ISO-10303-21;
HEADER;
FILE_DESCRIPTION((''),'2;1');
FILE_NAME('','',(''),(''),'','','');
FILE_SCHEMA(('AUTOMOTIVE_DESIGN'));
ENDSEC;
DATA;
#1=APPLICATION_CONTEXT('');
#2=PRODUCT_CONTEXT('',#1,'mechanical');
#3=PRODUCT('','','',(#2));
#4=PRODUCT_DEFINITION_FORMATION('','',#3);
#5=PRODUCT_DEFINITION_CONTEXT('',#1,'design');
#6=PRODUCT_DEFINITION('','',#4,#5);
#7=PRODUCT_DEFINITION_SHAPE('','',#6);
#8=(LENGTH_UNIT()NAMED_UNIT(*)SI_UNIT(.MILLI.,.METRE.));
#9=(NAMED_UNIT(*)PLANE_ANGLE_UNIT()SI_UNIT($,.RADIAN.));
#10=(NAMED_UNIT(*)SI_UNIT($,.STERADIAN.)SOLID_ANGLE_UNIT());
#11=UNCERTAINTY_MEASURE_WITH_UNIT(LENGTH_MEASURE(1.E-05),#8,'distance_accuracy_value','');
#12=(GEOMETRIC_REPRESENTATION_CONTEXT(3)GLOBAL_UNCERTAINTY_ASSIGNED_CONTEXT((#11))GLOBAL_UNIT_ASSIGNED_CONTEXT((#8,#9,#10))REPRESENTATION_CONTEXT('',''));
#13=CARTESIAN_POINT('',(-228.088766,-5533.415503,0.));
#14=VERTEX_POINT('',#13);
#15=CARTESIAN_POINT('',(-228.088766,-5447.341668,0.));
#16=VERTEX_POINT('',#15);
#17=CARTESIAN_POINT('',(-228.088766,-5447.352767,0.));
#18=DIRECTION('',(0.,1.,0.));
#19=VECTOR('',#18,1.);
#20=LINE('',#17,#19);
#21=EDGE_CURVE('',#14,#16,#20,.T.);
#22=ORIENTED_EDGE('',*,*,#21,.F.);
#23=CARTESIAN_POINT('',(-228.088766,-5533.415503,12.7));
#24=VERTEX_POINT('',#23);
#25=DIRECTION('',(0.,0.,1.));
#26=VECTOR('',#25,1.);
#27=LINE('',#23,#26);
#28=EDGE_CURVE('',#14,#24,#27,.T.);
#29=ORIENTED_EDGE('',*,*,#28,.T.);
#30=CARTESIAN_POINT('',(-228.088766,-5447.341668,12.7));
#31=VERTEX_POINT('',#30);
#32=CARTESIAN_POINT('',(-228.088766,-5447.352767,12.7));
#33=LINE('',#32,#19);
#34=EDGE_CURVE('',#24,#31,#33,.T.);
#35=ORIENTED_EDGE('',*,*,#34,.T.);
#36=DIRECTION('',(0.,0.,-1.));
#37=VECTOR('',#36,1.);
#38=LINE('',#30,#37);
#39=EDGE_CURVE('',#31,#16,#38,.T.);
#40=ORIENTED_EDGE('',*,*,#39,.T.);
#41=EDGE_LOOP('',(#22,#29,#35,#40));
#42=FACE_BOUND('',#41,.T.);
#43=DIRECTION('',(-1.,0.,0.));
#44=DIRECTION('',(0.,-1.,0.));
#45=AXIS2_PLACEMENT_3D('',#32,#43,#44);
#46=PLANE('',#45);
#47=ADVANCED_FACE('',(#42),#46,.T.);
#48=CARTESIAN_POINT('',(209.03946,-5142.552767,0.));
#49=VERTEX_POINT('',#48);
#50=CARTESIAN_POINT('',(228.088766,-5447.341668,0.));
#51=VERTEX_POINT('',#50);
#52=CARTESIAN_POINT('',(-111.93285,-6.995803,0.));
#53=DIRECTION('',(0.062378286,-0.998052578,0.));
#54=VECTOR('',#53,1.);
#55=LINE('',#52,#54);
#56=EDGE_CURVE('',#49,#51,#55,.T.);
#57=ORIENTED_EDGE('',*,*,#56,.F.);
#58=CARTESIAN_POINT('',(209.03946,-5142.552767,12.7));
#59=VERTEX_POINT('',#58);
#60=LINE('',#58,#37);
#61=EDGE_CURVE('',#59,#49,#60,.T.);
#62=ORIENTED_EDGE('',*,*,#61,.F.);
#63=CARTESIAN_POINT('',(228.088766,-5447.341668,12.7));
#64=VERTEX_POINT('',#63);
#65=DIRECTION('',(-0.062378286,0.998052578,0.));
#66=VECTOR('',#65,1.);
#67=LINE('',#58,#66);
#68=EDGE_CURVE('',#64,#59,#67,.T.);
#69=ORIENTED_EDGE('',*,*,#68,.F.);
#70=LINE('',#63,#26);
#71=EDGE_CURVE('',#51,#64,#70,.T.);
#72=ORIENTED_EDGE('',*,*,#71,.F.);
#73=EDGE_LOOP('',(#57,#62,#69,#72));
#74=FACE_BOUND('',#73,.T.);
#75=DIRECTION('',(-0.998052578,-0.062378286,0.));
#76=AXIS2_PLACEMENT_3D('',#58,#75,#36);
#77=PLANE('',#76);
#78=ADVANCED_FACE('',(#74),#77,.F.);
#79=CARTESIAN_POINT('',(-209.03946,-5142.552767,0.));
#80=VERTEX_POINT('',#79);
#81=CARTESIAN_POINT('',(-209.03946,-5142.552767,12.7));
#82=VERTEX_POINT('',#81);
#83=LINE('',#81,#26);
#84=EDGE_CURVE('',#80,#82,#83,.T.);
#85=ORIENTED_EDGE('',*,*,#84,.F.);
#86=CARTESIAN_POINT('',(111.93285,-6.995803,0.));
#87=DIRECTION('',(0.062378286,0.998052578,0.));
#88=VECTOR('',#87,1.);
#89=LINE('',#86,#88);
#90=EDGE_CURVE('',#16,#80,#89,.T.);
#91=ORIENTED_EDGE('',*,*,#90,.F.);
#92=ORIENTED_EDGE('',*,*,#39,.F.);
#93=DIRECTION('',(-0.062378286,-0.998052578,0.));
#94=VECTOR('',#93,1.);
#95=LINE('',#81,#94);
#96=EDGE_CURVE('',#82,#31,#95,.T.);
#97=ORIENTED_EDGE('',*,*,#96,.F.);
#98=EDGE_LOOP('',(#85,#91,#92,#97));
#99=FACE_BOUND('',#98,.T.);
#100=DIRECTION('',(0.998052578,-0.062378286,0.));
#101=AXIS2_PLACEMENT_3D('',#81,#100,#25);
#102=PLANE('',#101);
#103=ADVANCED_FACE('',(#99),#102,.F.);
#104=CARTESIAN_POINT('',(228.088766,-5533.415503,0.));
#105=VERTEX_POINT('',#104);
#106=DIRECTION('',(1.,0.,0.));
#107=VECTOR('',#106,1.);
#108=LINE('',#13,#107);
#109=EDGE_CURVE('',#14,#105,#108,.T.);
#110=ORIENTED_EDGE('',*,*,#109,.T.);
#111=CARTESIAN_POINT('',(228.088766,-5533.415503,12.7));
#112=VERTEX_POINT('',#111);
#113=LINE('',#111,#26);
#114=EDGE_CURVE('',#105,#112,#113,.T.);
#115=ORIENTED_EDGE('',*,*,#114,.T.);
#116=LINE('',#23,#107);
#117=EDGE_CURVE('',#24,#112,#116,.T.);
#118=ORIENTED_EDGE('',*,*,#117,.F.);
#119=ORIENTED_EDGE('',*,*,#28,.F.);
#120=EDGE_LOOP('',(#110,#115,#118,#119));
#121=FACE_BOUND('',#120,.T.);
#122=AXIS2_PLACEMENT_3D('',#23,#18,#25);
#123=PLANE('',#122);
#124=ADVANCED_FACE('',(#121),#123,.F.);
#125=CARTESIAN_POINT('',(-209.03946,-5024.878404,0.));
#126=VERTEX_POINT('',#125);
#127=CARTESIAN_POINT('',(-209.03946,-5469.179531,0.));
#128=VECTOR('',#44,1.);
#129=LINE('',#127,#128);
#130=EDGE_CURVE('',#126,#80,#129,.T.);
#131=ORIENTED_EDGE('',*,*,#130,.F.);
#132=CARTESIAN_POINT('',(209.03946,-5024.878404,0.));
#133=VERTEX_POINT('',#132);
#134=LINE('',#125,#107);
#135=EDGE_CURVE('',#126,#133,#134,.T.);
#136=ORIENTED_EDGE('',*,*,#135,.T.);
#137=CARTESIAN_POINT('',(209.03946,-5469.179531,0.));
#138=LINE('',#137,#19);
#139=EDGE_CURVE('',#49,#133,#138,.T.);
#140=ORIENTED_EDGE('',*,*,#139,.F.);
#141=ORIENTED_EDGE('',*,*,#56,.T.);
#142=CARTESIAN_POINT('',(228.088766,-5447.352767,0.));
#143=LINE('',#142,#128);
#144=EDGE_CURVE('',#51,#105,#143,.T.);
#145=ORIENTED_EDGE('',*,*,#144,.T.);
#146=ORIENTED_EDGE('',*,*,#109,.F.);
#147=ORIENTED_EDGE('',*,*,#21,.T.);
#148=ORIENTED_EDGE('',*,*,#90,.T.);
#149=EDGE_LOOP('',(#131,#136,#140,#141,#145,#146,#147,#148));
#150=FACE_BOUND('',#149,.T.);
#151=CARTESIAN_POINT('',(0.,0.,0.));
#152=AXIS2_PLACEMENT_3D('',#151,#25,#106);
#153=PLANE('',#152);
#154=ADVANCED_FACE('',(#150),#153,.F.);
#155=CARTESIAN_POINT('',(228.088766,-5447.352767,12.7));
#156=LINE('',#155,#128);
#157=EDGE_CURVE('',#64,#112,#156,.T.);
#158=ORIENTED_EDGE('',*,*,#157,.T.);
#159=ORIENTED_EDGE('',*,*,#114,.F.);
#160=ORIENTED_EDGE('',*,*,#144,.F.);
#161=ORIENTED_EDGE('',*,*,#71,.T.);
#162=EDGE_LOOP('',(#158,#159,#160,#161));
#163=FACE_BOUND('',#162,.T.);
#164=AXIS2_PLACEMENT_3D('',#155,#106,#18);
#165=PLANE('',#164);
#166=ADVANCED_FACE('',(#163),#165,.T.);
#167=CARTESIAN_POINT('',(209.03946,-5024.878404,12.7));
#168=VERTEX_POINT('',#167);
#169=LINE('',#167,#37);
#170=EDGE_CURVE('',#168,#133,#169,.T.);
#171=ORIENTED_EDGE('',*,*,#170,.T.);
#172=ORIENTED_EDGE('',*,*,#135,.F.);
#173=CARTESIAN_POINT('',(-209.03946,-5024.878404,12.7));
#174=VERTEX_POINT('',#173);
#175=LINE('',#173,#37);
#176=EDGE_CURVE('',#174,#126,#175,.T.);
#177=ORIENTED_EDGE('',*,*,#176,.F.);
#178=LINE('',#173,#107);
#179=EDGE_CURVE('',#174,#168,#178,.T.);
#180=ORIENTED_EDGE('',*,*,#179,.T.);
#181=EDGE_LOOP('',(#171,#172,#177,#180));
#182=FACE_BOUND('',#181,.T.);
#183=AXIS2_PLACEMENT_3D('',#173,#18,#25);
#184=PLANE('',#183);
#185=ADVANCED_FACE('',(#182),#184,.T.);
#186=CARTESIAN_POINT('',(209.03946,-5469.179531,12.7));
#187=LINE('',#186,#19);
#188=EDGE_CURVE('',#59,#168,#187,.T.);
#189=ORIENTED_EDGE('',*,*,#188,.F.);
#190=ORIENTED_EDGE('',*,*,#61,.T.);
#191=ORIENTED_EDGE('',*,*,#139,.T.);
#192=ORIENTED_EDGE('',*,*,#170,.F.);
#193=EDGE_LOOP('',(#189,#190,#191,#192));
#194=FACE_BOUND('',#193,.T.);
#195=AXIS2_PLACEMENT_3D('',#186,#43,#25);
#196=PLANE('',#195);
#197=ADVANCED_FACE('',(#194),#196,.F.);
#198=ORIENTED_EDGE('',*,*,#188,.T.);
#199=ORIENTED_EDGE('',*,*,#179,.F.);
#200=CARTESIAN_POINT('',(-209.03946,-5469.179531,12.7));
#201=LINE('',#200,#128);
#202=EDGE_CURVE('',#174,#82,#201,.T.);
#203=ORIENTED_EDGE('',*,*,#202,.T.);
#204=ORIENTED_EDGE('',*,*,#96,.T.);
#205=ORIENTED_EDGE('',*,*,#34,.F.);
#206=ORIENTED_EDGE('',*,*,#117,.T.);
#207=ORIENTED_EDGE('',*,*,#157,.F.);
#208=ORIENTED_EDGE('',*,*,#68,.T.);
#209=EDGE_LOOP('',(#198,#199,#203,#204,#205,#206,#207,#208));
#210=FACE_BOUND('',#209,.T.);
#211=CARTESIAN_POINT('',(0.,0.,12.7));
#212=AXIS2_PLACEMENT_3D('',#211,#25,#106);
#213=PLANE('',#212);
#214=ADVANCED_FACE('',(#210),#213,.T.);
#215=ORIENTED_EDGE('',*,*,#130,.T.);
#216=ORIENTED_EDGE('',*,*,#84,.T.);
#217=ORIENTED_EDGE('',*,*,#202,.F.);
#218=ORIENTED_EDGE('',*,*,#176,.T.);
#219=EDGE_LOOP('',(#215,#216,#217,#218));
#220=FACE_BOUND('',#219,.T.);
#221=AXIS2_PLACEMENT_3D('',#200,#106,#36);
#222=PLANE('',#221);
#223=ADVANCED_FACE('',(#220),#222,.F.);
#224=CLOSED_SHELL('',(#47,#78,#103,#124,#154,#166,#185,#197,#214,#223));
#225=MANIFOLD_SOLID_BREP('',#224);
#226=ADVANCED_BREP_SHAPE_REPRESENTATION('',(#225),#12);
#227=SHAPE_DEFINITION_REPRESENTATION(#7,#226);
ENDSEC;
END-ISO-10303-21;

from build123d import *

# Parameters (mm, degrees)
SKETCH1_W           = 418.07892
SKETCH1_H           = 415.925
BOSS_EXTRUDE1_DEPTH = 12.7
SKETCH2_W           = 418.07892
SKETCH2_H           = 79.68996
BOSS_EXTRUDE2_DEPTH = 12.7
SKETCH3_W           = 418.07892
SKETCH3_H           = 28.376126504
BOSS_EXTRUDE3_DEPTH = 12.7
BOSS_EXTRUDE4_DEPTH = 12.7
CHAMFER1_SIZE       = 304.8
CHAMFER1_SIZE_2     = 19.05
SKETCH5_W           = 12.7
SKETCH5_H           = 15.453987587
CUT_EXTRUDE1_DEPTH  = 5568.603780331


with BuildPart() as part:
    # Sketch1 → Boss-Extrude1 (new body)
    with BuildSketch(Plane.XY):
        with Locations((0, -5261.217030575)):
            Rectangle(SKETCH1_W, SKETCH1_H)
    extrude(amount=BOSS_EXTRUDE1_DEPTH)

    # Sketch2 → Boss-Extrude2 (add, through all)
    with BuildSketch(Plane(origin=(0, 0, 0), x_dir=(-1, 0, 0), z_dir=(0, 0, -1))):
        with Locations((0, -5509.024510575)):
            Rectangle(SKETCH2_W, SKETCH2_H)
    extrude(amount=-BOSS_EXTRUDE2_DEPTH)

    # Sketch3 → Boss-Extrude3 (add, through all)
    with BuildSketch(Plane(origin=(0, 0, 0), x_dir=(-1, 0, 0), z_dir=(0, 0, -1))):
        with Locations((0, -5039.066467323)):
            Rectangle(SKETCH3_W, SKETCH3_H)
    extrude(amount=-BOSS_EXTRUDE3_DEPTH)

    # Sketch4 → Boss-Extrude4 (add, through all)
    with BuildSketch(Plane(origin=(0, 0, 0), x_dir=(-1, 0, 0), z_dir=(0, 0, -1))):
        Polygon((209.038766336, -5447.352766987), (228.088766336, -5447.352766987), (228.088766336, -5548.869490575), (209.03946, -5548.869490575), align=None)
        Polygon((-209.03946, -5548.869490575), (-209.038766336, -5447.352766987), (-228.088766336, -5447.352766987), (-228.088766336, -5548.869490575), align=None)
    extrude(amount=-BOSS_EXTRUDE4_DEPTH)

    # Chamfer1
    # the kernel refuses this chamfer: 304.8, 19.05 mm, written as the material it adds along each edge
    with BuildSketch(Plane(origin=(-209.03946, -5447.352766987, 0), x_dir=(0.002399337658707147, 0.9999971215852571, 0), z_dir=(0, 0, 1))) as chamfer1_piece_1_section:
        Polygon((CHAMFER1_SIZE * 0.999997121585, CHAMFER1_SIZE * 0.00239933765871), (-CHAMFER1_SIZE_2 * 0.00239933765871, CHAMFER1_SIZE_2 * 0.999997121585), (0, 0), align=None)
    chamfer1_piece_1 = extrude(amount=12.7, mode=Mode.PRIVATE)
    chamfer1_piece_1 = split(chamfer1_piece_1, bisect_by=Plane(origin=(-228.088766336, -5325.682018196, 6.35), z_dir=(1, 0, 0)), keep=Keep.TOP, mode=Mode.PRIVATE)
    add(chamfer1_piece_1)
    with BuildSketch(Plane(origin=(209.03946, -5447.352766987, 0), x_dir=(0.8520963193143735, -0.5233850041899339, 0), z_dir=(0, 0, 1))) as chamfer1_piece_2_section:
        Polygon((CHAMFER1_SIZE_2 * 0.852096319314, CHAMFER1_SIZE_2 * 0.52338500419), (-CHAMFER1_SIZE * 0.52338500419, CHAMFER1_SIZE * 0.852096319314), (0, 0), align=None)
    chamfer1_piece_2 = extrude(amount=12.7, mode=Mode.PRIVATE)
    chamfer1_piece_2 = split(chamfer1_piece_2, bisect_by=Plane(origin=(228.088766336, -5325.682018196, 6.35), z_dir=(-1, 0, 0)), keep=Keep.TOP, mode=Mode.PRIVATE)
    add(chamfer1_piece_2)

    # Sketch5 → Cut-Extrude1 (cut, through all)
    with BuildSketch(Plane(origin=(228.088766336, 0, 0), x_dir=(0, 0, -1), z_dir=(1, 0, 0))):
        with Locations((-6.35, -5541.142496782)):
            Rectangle(SKETCH5_W, SKETCH5_H)
    extrude(amount=-CUT_EXTRUDE1_DEPTH, mode=Mode.SUBTRACT)


solid = part.part
